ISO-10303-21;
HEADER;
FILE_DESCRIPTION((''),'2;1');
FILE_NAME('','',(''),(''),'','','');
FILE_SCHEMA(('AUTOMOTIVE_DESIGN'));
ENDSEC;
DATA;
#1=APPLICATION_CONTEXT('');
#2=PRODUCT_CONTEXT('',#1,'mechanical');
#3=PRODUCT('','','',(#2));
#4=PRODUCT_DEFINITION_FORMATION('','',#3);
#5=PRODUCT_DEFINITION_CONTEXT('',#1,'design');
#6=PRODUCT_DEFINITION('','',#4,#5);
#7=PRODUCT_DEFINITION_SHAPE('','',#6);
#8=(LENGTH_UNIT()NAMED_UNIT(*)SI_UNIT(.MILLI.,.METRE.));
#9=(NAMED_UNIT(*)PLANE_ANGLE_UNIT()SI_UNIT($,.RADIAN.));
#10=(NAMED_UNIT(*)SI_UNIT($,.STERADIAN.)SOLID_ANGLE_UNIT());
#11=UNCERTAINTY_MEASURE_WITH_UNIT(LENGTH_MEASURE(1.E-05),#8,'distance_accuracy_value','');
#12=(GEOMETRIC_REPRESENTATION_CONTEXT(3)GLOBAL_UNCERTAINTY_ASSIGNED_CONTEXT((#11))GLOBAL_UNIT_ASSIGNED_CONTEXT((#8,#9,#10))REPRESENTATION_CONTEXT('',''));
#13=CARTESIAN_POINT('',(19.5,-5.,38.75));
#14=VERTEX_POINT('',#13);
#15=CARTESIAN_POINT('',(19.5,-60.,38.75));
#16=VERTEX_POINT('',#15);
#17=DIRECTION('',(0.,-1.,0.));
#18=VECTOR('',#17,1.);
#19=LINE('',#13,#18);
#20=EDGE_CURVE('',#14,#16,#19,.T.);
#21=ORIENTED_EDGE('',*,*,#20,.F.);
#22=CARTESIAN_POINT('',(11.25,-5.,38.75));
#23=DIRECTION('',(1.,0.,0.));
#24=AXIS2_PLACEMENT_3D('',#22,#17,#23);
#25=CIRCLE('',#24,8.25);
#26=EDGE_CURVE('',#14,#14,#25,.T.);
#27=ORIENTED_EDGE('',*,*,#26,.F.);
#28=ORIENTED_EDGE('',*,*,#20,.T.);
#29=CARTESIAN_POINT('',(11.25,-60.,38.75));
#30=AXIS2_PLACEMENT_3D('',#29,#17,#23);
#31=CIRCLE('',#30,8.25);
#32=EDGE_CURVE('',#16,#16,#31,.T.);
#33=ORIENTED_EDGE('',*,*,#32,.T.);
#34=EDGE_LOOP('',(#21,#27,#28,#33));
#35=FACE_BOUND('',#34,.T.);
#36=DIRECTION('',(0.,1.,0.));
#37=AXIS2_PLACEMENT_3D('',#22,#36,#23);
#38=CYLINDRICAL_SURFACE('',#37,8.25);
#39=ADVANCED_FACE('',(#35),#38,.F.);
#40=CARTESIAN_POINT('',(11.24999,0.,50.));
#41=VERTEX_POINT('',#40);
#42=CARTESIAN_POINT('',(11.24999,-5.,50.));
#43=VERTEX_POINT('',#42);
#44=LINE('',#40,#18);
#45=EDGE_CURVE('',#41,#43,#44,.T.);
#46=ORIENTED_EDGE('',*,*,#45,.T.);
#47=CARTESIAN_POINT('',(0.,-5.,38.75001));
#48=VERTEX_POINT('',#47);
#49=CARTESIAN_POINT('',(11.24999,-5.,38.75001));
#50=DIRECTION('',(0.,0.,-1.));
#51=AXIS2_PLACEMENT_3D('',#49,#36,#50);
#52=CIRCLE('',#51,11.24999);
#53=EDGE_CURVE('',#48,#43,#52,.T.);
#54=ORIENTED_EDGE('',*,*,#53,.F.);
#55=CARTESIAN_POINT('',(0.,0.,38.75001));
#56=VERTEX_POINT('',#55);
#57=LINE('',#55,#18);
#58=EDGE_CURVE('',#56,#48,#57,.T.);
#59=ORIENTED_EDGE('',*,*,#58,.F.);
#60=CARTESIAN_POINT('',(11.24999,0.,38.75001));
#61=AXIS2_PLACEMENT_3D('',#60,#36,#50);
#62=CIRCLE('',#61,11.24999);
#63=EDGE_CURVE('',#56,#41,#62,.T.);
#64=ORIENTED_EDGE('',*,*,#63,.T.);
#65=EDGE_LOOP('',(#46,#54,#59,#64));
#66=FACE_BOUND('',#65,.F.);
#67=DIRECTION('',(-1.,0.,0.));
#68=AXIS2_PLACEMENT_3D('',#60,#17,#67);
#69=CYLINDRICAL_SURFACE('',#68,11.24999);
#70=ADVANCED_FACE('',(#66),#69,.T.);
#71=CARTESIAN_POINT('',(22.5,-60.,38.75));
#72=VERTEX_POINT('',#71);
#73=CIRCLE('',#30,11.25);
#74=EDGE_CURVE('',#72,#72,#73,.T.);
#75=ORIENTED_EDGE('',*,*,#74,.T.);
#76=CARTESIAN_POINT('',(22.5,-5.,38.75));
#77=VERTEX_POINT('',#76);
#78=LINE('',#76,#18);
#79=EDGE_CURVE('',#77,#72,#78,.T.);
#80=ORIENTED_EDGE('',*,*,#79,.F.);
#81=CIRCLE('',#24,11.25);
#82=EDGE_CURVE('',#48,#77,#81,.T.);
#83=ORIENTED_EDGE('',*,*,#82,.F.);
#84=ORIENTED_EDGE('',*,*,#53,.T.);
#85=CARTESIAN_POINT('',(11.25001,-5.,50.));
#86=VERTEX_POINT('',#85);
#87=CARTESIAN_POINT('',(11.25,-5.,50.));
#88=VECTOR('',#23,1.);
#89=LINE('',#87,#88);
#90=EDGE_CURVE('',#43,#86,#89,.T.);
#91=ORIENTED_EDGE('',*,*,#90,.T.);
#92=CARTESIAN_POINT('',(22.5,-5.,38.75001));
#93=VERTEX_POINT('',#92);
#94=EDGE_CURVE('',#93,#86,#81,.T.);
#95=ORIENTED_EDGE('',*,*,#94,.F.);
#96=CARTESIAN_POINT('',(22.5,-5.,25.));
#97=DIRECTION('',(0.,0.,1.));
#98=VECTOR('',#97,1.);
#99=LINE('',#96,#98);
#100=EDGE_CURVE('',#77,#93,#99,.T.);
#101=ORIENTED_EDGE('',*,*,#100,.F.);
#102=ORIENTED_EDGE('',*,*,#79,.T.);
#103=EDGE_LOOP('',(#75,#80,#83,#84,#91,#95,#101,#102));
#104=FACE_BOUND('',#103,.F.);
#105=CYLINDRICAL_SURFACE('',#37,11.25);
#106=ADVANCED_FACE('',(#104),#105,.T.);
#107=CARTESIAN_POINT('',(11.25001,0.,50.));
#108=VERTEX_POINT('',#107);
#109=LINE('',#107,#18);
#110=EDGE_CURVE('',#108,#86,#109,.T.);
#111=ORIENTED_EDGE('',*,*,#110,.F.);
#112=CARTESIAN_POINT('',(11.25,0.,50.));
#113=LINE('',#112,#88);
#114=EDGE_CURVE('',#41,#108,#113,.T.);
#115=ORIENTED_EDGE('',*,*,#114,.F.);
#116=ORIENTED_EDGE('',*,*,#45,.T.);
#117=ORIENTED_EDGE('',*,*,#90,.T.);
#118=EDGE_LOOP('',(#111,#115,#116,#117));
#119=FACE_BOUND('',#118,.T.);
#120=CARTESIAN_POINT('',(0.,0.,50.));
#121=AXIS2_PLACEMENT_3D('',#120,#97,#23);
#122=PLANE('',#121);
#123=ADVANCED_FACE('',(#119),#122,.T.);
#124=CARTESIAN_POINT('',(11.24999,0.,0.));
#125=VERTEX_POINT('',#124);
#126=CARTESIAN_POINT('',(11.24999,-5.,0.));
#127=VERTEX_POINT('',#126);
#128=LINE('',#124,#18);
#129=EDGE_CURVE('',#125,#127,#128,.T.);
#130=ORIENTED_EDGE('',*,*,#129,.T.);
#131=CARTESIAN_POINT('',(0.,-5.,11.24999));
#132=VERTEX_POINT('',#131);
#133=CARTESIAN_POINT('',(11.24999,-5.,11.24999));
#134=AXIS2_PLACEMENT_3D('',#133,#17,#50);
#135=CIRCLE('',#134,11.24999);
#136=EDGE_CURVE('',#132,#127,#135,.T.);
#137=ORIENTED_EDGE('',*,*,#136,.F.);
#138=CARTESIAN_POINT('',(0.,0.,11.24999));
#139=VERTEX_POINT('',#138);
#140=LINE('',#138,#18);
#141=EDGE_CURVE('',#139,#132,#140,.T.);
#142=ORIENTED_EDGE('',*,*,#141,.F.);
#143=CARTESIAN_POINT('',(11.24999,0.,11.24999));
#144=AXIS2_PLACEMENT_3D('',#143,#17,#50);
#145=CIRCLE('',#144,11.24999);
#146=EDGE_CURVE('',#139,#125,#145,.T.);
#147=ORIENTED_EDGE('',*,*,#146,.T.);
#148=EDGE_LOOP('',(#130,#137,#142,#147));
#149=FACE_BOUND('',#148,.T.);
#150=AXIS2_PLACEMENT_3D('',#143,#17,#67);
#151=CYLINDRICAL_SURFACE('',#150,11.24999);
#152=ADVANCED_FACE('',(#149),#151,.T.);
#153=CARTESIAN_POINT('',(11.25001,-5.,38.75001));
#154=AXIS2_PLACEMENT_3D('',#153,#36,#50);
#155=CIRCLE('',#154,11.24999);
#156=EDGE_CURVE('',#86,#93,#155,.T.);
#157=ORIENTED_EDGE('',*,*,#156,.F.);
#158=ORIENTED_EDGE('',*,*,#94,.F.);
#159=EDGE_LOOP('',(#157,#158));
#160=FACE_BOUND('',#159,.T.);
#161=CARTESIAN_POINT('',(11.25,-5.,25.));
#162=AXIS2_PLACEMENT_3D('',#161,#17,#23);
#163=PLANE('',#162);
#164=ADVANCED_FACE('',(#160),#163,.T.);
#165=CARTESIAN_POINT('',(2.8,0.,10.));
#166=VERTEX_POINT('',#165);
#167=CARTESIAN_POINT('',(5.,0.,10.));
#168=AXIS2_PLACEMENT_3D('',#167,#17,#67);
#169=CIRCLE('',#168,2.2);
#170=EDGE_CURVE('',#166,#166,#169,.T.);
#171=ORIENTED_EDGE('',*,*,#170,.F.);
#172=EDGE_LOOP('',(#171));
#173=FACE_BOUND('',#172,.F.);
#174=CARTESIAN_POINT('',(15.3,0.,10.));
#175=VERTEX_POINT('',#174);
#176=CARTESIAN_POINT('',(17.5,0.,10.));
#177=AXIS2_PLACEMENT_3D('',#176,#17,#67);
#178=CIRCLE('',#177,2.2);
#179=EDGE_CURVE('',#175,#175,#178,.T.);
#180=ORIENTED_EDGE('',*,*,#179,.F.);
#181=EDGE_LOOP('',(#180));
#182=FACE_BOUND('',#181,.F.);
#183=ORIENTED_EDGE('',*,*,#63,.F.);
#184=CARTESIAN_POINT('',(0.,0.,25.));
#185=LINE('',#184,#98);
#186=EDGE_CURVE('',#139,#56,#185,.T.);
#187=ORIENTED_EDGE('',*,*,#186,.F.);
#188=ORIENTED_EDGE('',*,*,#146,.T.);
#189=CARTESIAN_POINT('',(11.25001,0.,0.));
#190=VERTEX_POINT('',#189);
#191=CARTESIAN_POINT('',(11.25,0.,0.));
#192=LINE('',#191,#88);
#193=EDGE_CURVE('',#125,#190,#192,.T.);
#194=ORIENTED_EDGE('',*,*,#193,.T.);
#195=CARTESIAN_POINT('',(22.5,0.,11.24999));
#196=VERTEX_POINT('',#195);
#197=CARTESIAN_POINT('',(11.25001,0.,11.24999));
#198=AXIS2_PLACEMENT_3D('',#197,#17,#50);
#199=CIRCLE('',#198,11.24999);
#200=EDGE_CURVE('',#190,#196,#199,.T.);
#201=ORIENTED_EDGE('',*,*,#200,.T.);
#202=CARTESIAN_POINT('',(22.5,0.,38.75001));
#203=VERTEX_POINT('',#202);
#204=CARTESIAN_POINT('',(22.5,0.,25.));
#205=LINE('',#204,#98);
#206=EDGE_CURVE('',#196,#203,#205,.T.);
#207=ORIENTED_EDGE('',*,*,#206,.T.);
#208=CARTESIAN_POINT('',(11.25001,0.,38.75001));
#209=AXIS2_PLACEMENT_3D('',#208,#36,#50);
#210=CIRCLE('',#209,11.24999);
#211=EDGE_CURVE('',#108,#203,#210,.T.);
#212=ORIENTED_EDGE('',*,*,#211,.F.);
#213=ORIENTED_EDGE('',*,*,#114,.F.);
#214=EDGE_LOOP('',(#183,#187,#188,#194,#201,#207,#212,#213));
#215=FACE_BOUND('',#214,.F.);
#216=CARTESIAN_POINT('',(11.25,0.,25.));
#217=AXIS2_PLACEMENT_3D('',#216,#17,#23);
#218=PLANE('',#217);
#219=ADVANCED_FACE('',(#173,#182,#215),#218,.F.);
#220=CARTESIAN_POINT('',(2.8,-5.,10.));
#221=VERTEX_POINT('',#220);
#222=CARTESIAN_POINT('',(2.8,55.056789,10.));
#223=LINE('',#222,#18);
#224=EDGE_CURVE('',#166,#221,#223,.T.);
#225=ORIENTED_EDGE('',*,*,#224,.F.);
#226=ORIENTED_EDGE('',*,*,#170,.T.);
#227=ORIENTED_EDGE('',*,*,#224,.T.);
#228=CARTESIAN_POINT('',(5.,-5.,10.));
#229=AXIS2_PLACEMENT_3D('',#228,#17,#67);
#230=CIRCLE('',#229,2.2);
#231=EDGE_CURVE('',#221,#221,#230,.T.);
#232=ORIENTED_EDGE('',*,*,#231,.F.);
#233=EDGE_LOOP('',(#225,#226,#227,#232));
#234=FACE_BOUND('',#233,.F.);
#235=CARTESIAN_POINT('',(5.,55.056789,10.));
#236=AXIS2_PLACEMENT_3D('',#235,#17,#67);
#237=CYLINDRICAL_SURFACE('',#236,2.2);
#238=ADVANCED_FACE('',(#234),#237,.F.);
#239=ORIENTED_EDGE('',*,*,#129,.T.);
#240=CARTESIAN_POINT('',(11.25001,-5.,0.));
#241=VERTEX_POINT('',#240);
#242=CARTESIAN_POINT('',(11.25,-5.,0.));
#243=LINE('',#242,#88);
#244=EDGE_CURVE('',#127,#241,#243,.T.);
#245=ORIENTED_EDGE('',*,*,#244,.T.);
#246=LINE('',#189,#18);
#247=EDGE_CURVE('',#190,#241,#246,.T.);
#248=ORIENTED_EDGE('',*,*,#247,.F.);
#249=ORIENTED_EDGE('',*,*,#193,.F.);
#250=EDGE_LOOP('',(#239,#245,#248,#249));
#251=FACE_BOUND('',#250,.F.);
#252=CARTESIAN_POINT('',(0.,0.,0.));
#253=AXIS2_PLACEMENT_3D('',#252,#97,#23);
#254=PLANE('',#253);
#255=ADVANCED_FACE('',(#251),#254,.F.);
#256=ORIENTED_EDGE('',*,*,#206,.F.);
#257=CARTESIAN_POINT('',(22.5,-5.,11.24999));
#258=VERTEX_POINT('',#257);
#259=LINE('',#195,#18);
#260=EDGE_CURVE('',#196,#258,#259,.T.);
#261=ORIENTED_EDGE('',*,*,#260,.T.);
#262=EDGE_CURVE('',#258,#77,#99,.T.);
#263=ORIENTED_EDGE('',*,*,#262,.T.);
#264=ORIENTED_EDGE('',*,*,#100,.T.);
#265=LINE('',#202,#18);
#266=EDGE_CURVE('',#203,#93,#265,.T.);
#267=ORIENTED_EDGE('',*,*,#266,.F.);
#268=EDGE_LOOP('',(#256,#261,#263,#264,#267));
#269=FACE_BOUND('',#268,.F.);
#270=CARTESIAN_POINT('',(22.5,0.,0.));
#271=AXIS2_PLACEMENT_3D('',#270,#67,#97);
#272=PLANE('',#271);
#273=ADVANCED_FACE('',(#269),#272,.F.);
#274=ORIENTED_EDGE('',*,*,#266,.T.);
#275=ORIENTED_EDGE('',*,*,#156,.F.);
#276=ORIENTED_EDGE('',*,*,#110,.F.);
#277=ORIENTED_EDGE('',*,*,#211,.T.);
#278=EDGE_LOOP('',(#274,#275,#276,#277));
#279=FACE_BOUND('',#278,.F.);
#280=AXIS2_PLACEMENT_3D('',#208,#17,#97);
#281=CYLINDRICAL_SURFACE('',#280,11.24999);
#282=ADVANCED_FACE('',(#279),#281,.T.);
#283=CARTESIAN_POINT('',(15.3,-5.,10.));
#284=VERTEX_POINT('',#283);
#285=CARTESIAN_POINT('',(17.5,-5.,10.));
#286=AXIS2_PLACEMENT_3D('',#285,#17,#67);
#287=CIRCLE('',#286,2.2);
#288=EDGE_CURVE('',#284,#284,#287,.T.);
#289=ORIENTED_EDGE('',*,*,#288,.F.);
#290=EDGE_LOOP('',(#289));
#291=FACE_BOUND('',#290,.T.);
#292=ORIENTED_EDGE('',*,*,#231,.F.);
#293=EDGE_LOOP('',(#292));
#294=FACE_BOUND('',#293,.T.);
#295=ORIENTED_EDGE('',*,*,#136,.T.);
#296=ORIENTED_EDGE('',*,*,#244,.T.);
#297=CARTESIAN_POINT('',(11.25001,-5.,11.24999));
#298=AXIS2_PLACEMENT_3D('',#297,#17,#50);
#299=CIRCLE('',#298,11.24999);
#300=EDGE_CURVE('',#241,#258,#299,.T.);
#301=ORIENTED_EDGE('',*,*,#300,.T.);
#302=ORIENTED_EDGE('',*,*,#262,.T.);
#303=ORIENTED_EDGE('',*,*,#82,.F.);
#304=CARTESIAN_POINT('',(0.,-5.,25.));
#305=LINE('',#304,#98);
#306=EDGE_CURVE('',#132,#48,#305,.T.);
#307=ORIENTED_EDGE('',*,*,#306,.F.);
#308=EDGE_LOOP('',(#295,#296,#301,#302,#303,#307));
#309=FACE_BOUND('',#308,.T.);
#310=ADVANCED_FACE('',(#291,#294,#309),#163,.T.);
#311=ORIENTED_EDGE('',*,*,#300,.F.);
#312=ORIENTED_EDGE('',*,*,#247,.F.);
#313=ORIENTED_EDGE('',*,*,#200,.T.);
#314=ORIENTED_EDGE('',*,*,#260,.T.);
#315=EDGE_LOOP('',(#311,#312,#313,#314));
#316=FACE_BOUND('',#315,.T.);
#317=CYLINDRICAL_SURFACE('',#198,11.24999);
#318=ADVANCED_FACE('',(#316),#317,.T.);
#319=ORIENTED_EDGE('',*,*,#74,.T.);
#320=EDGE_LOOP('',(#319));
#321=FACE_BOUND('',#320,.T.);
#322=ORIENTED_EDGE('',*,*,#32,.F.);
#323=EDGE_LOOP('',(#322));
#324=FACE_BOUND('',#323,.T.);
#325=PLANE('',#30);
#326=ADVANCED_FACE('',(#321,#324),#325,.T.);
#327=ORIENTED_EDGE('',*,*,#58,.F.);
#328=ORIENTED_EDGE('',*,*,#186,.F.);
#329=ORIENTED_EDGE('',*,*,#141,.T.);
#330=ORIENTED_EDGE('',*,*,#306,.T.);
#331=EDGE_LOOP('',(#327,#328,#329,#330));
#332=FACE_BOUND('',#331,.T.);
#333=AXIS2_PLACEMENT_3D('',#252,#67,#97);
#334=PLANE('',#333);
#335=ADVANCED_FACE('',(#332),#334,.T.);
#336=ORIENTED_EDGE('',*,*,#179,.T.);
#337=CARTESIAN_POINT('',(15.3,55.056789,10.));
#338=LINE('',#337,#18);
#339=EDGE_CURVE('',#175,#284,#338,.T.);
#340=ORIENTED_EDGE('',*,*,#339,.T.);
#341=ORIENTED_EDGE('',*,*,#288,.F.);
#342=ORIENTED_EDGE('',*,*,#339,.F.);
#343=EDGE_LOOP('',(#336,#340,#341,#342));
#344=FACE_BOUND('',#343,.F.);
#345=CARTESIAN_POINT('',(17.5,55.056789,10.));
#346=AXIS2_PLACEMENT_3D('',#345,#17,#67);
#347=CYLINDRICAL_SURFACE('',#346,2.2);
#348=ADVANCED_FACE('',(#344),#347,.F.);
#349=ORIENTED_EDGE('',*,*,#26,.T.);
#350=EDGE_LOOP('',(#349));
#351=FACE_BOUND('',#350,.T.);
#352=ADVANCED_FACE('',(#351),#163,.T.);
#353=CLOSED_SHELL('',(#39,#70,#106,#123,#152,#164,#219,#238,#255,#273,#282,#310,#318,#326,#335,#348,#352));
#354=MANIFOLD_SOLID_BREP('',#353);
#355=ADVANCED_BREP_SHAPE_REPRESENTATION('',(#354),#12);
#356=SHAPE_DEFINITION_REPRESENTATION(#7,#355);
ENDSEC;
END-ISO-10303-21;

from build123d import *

# Parameters (mm, degrees)
F0_W     = 22.5
F0_H     = 50
F1_DEPTH = 5
F2_D     = 4.4
F4_R     = 11.24999
F3_R     = 11.25
F3_R_2   = 8.25
F5_DEPTH = 55


# Not quite as in the source:
# - a fillet or chamfer is up to 0.001 mm smaller than in the source, because OpenCascade refuses the exact size


with BuildPart() as f1:
    # F0 (on Front) → F1 (new body)
    with BuildSketch(Plane.XZ):
        with Locations((11.25, 25)):
            Rectangle(F0_W, F0_H)
    extrude(amount=F1_DEPTH)

    # F2 (through all)
    with Locations(Plane(origin=(0, 0, 0), x_dir=(1, 0, 0), z_dir=(0, 1, 0))):
        with Locations((5, -10), (17.5, -10)):
            Hole(F2_D / 2)

    # F4 (radius 11.25 in the source; OpenCascade refuses exactly that, so slightly less here)
    f4_edges = [f1.edges().sort_by_distance(p)[0] for p in [
        (22.5, -2.5, 50),
        (0, -2.5, 50),
        (22.5, -2.5, 0),
        (0, -2.5, 0),
    ]]
    fillet(f4_edges, radius=F4_R)

    # F3 (on face) → F5 (join)
    with BuildSketch(Plane.XZ.offset(5)):
        with Locations((11.25, 38.75)):
            Circle(F3_R)
        with Locations((11.25, 38.75)):
            Circle(F3_R_2, mode=Mode.SUBTRACT)
    extrude(amount=F5_DEPTH)


solid = f1.part
